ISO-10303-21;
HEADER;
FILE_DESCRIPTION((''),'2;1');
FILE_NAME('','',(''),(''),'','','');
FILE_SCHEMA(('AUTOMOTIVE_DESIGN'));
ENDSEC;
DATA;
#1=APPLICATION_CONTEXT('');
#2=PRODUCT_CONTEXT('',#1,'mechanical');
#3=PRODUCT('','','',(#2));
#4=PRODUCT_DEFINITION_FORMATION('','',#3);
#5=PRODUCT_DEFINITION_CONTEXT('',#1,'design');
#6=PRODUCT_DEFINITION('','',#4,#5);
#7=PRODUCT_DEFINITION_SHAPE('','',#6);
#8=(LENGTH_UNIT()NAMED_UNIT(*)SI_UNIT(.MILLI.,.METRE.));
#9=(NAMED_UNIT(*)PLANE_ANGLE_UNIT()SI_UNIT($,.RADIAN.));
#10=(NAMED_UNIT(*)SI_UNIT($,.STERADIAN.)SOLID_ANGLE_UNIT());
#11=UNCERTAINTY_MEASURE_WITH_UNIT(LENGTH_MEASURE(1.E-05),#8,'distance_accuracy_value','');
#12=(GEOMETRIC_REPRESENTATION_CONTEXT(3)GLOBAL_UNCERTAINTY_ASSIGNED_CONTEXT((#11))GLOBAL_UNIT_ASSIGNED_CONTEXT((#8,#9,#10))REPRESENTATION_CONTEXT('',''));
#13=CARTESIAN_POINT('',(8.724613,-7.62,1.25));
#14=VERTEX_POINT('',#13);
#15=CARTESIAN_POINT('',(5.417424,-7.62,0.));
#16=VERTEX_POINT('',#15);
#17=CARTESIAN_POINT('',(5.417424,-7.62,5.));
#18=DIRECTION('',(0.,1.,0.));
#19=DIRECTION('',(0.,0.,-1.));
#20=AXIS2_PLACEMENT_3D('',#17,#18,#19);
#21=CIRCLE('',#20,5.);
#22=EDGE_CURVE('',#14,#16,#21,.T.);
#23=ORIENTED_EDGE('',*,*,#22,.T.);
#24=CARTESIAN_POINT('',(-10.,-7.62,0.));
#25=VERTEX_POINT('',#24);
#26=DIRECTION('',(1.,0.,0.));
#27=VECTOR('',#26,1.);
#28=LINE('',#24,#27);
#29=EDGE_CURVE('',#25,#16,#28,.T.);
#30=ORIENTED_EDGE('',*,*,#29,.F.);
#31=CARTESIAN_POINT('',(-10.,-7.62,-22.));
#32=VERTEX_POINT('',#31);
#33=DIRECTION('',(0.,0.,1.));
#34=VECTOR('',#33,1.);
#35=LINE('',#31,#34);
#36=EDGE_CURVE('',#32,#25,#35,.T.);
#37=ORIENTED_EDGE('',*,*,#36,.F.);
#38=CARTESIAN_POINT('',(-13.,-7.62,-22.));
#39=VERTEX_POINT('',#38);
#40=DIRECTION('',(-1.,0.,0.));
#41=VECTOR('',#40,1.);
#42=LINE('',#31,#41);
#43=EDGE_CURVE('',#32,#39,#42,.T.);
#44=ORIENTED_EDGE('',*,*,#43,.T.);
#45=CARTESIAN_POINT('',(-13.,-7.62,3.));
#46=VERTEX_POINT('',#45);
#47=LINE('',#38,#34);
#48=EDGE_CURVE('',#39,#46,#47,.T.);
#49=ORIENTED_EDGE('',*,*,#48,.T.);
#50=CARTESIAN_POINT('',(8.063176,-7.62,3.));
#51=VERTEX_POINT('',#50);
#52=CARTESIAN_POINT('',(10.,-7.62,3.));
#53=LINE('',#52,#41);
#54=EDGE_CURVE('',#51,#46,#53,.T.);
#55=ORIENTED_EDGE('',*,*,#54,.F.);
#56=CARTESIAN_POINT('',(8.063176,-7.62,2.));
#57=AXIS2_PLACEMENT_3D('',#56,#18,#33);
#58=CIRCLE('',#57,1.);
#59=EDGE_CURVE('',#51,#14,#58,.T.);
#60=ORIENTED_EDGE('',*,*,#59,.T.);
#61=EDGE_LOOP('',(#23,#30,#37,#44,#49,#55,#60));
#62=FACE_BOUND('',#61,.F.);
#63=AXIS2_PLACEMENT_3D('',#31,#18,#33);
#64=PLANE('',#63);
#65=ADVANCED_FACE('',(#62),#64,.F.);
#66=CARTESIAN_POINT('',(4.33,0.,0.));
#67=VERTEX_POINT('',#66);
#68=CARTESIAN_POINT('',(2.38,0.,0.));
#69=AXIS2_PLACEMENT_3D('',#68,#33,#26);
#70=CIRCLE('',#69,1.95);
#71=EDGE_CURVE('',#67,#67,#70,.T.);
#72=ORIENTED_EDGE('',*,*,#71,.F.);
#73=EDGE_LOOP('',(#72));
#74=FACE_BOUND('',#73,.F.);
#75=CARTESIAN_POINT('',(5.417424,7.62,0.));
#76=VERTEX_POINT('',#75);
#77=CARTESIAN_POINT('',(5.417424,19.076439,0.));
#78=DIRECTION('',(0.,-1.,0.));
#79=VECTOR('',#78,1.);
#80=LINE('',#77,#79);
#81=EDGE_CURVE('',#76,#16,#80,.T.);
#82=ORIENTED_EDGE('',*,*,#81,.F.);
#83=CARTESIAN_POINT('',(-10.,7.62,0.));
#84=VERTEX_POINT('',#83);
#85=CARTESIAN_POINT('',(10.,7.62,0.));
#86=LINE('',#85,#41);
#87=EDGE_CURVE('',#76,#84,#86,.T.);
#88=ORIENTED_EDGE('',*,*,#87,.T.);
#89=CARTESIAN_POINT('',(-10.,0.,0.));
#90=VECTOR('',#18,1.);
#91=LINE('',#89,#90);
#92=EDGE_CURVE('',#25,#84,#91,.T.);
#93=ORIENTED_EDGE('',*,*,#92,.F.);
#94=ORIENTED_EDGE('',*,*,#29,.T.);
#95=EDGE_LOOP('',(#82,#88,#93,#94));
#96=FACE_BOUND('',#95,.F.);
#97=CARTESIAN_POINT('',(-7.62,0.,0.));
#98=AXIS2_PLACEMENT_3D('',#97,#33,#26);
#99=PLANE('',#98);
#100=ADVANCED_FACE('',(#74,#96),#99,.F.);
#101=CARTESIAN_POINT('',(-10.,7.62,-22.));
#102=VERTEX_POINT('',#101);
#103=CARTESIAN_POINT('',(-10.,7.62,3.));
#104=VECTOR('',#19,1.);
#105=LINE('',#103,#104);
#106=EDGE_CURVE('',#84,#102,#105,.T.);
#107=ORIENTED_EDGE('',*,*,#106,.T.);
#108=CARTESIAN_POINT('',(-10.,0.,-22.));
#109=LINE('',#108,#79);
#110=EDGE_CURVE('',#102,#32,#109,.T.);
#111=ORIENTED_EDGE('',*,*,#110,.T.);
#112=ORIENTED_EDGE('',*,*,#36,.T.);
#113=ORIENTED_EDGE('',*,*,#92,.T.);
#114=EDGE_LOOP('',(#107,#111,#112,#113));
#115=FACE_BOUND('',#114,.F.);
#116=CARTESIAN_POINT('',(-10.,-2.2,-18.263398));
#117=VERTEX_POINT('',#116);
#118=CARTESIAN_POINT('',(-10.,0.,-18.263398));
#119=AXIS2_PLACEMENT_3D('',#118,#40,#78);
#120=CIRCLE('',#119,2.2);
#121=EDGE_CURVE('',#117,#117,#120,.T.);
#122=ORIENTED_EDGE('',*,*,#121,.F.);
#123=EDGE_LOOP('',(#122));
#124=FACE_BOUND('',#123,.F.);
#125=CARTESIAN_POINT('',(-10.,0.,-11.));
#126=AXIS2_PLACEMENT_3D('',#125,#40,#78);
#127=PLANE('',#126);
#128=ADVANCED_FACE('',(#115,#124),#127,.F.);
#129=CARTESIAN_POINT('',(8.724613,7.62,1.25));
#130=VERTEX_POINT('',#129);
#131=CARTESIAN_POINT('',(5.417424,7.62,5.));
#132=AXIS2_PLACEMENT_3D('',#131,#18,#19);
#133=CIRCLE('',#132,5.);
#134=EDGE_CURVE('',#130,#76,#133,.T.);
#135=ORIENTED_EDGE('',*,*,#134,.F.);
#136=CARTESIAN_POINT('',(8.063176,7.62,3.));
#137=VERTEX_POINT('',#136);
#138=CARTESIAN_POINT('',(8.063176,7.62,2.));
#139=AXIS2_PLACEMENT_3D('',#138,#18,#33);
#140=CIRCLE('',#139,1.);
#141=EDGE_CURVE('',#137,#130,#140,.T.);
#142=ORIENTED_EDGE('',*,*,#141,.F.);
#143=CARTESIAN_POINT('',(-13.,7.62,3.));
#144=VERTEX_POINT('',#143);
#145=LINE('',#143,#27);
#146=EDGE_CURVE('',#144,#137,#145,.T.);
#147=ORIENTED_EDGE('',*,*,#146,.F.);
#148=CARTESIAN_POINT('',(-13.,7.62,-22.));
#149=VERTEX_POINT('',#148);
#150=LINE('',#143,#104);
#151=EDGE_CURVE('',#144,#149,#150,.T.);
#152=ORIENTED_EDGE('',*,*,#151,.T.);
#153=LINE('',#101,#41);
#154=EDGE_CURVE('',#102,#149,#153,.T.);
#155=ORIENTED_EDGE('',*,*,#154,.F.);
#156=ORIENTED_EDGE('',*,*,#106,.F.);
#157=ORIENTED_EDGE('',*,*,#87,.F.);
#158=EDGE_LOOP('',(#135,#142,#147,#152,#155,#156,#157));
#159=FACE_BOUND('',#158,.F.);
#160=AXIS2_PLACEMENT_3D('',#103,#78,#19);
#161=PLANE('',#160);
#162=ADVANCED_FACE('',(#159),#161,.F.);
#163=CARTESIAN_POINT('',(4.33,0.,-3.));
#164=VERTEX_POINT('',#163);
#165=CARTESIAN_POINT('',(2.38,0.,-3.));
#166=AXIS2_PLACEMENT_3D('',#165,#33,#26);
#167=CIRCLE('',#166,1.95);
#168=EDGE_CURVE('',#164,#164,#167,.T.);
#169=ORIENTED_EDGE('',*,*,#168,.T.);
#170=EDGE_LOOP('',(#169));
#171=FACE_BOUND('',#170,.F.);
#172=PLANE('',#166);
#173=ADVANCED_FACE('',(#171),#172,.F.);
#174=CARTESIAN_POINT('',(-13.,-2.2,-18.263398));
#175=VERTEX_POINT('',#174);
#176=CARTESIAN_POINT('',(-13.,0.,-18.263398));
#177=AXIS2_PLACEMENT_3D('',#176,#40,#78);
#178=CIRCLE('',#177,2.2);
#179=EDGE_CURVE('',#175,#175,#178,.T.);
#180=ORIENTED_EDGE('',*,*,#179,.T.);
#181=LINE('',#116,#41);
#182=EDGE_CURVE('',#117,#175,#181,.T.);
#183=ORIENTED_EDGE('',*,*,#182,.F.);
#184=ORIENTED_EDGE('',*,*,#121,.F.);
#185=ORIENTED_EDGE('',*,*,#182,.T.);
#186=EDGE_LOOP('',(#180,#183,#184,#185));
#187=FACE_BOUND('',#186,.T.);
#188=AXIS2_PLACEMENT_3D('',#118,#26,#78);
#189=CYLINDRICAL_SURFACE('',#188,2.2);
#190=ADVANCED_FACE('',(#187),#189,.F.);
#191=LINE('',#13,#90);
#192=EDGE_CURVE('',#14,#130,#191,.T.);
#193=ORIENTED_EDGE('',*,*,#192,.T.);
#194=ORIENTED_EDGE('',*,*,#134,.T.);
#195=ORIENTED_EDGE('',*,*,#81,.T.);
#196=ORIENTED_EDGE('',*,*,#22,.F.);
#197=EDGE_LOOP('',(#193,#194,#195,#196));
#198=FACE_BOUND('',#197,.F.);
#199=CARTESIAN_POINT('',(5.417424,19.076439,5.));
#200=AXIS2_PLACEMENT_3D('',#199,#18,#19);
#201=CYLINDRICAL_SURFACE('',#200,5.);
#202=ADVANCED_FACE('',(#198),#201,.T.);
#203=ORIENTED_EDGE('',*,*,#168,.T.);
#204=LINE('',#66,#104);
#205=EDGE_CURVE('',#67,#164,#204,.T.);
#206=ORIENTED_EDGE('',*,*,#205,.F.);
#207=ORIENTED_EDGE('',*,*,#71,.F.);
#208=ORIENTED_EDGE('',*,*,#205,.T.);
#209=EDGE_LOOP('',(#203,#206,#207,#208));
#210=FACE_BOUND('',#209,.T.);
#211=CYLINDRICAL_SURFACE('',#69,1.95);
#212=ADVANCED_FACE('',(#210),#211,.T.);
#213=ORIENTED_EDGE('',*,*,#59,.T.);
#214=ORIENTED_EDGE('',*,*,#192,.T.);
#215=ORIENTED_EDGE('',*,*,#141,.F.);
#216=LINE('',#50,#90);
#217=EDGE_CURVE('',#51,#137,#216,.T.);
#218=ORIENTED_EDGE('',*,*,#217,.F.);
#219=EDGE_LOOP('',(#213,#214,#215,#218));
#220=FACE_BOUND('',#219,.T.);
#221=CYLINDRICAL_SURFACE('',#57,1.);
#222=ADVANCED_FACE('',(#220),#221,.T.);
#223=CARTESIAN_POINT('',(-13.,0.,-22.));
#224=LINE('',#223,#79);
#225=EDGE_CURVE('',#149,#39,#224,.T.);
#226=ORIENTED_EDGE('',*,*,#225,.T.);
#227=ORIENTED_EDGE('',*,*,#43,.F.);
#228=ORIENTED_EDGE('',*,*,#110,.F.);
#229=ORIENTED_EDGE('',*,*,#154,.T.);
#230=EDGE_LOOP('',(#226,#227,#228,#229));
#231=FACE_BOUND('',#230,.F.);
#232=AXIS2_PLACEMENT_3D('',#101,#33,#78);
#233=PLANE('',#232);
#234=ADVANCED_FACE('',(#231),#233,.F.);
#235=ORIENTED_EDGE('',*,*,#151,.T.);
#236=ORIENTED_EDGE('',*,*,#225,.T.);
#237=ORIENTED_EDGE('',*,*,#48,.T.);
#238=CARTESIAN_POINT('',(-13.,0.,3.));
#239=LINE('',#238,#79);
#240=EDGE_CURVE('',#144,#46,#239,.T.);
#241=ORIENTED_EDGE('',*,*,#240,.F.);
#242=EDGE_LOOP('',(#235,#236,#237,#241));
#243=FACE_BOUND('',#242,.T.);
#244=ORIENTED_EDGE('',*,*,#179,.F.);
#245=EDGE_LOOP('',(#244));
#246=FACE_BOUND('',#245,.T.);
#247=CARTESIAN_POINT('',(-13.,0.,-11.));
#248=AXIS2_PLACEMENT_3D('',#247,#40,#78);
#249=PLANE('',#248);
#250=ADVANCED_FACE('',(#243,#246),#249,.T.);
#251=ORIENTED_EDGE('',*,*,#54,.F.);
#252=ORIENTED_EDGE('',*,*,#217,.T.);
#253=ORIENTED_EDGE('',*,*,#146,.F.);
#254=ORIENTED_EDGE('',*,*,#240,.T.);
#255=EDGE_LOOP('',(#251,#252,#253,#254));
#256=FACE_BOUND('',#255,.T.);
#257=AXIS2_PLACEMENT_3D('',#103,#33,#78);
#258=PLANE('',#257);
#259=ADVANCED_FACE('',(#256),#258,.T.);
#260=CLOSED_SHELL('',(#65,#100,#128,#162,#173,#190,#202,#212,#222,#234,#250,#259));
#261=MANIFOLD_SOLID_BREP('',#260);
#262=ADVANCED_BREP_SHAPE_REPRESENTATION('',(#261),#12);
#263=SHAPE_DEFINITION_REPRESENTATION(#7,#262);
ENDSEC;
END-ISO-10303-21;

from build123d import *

# Parameters (mm, degrees)
F0_W        = 4.76
F0_H        = 15.24
F0_W_2      = 15.24
F0_R        = 1.95
F1_DEPTH    = 3
F2_DEPTH    = 3
F3_W        = 15.24
F3_H        = 22
F3_R        = 2.2
F3_H_2      = 3
F4_DEPTH    = 3
F5_T1_DEPTH = 38.1528784748
F6_R        = 1


# Not quite as in the source:
# - a fillet or chamfer that OpenCascade refuses, or shapes differently, is made with other operations: its cross-section is extruded or revolved along the edge and cut away or added
# - a feature names something its author has since deleted; it is built from what else it names


with BuildPart() as f1:
    # F0 (on Top) → F1 (new body)
    with BuildSketch(Plane.XY):
        with Locations((-7.62, 0)):
            Rectangle(F0_W, F0_H)
        with Locations((2.38, 0)):
            Rectangle(F0_W_2, F0_H)
        with Locations((2.38, 0)):
            Circle(F0_R, mode=Mode.SUBTRACT)
        with Locations((2.38, 0)):
            Circle(F0_R)
    extrude(amount=F1_DEPTH)

    # F0 (on Top) → F2 (join)
    with BuildSketch(Plane.XY):
        with Locations((2.38, 0)):
            Circle(F0_R)
    extrude(amount=-F2_DEPTH)

    # F3 (on face) → F4 (join)
    with BuildSketch(Plane(origin=(-10, 0, 0), x_dir=(0, -1, 0), z_dir=(-1, 0, 0))):
        with Locations((0, -11)):
            Rectangle(F3_W, F3_H)
        with Locations((0, -18.2633977383)):
            Circle(F3_R, mode=Mode.SUBTRACT)
        with Locations((0, 1.5)):
            Rectangle(F3_W, F3_H_2)
    extrude(amount=F4_DEPTH)

    # F5: fillet of radius 5 on 1 edges, made by hand

    # F5_s2 → F5_t1 (cut)
    with BuildSketch(Plane.XZ.offset(-19.0764392374)):
        with BuildLine():
            ThreePointArc((5.417424305, 0), (8.1560370926, 0.8166998673), (10, 3))
            Line((10, 3), (10, 0))
            Line((10, 0), (5.417424305, 0))
        make_face()
    extrude(amount=F5_T1_DEPTH, mode=Mode.SUBTRACT)

    # F6
    f6_edges = [f1.edges().sort_by_distance(p)[0] for p in [
        (10, 0, 3),
    ]]
    fillet(f6_edges, radius=F6_R)


solid = f1.part
